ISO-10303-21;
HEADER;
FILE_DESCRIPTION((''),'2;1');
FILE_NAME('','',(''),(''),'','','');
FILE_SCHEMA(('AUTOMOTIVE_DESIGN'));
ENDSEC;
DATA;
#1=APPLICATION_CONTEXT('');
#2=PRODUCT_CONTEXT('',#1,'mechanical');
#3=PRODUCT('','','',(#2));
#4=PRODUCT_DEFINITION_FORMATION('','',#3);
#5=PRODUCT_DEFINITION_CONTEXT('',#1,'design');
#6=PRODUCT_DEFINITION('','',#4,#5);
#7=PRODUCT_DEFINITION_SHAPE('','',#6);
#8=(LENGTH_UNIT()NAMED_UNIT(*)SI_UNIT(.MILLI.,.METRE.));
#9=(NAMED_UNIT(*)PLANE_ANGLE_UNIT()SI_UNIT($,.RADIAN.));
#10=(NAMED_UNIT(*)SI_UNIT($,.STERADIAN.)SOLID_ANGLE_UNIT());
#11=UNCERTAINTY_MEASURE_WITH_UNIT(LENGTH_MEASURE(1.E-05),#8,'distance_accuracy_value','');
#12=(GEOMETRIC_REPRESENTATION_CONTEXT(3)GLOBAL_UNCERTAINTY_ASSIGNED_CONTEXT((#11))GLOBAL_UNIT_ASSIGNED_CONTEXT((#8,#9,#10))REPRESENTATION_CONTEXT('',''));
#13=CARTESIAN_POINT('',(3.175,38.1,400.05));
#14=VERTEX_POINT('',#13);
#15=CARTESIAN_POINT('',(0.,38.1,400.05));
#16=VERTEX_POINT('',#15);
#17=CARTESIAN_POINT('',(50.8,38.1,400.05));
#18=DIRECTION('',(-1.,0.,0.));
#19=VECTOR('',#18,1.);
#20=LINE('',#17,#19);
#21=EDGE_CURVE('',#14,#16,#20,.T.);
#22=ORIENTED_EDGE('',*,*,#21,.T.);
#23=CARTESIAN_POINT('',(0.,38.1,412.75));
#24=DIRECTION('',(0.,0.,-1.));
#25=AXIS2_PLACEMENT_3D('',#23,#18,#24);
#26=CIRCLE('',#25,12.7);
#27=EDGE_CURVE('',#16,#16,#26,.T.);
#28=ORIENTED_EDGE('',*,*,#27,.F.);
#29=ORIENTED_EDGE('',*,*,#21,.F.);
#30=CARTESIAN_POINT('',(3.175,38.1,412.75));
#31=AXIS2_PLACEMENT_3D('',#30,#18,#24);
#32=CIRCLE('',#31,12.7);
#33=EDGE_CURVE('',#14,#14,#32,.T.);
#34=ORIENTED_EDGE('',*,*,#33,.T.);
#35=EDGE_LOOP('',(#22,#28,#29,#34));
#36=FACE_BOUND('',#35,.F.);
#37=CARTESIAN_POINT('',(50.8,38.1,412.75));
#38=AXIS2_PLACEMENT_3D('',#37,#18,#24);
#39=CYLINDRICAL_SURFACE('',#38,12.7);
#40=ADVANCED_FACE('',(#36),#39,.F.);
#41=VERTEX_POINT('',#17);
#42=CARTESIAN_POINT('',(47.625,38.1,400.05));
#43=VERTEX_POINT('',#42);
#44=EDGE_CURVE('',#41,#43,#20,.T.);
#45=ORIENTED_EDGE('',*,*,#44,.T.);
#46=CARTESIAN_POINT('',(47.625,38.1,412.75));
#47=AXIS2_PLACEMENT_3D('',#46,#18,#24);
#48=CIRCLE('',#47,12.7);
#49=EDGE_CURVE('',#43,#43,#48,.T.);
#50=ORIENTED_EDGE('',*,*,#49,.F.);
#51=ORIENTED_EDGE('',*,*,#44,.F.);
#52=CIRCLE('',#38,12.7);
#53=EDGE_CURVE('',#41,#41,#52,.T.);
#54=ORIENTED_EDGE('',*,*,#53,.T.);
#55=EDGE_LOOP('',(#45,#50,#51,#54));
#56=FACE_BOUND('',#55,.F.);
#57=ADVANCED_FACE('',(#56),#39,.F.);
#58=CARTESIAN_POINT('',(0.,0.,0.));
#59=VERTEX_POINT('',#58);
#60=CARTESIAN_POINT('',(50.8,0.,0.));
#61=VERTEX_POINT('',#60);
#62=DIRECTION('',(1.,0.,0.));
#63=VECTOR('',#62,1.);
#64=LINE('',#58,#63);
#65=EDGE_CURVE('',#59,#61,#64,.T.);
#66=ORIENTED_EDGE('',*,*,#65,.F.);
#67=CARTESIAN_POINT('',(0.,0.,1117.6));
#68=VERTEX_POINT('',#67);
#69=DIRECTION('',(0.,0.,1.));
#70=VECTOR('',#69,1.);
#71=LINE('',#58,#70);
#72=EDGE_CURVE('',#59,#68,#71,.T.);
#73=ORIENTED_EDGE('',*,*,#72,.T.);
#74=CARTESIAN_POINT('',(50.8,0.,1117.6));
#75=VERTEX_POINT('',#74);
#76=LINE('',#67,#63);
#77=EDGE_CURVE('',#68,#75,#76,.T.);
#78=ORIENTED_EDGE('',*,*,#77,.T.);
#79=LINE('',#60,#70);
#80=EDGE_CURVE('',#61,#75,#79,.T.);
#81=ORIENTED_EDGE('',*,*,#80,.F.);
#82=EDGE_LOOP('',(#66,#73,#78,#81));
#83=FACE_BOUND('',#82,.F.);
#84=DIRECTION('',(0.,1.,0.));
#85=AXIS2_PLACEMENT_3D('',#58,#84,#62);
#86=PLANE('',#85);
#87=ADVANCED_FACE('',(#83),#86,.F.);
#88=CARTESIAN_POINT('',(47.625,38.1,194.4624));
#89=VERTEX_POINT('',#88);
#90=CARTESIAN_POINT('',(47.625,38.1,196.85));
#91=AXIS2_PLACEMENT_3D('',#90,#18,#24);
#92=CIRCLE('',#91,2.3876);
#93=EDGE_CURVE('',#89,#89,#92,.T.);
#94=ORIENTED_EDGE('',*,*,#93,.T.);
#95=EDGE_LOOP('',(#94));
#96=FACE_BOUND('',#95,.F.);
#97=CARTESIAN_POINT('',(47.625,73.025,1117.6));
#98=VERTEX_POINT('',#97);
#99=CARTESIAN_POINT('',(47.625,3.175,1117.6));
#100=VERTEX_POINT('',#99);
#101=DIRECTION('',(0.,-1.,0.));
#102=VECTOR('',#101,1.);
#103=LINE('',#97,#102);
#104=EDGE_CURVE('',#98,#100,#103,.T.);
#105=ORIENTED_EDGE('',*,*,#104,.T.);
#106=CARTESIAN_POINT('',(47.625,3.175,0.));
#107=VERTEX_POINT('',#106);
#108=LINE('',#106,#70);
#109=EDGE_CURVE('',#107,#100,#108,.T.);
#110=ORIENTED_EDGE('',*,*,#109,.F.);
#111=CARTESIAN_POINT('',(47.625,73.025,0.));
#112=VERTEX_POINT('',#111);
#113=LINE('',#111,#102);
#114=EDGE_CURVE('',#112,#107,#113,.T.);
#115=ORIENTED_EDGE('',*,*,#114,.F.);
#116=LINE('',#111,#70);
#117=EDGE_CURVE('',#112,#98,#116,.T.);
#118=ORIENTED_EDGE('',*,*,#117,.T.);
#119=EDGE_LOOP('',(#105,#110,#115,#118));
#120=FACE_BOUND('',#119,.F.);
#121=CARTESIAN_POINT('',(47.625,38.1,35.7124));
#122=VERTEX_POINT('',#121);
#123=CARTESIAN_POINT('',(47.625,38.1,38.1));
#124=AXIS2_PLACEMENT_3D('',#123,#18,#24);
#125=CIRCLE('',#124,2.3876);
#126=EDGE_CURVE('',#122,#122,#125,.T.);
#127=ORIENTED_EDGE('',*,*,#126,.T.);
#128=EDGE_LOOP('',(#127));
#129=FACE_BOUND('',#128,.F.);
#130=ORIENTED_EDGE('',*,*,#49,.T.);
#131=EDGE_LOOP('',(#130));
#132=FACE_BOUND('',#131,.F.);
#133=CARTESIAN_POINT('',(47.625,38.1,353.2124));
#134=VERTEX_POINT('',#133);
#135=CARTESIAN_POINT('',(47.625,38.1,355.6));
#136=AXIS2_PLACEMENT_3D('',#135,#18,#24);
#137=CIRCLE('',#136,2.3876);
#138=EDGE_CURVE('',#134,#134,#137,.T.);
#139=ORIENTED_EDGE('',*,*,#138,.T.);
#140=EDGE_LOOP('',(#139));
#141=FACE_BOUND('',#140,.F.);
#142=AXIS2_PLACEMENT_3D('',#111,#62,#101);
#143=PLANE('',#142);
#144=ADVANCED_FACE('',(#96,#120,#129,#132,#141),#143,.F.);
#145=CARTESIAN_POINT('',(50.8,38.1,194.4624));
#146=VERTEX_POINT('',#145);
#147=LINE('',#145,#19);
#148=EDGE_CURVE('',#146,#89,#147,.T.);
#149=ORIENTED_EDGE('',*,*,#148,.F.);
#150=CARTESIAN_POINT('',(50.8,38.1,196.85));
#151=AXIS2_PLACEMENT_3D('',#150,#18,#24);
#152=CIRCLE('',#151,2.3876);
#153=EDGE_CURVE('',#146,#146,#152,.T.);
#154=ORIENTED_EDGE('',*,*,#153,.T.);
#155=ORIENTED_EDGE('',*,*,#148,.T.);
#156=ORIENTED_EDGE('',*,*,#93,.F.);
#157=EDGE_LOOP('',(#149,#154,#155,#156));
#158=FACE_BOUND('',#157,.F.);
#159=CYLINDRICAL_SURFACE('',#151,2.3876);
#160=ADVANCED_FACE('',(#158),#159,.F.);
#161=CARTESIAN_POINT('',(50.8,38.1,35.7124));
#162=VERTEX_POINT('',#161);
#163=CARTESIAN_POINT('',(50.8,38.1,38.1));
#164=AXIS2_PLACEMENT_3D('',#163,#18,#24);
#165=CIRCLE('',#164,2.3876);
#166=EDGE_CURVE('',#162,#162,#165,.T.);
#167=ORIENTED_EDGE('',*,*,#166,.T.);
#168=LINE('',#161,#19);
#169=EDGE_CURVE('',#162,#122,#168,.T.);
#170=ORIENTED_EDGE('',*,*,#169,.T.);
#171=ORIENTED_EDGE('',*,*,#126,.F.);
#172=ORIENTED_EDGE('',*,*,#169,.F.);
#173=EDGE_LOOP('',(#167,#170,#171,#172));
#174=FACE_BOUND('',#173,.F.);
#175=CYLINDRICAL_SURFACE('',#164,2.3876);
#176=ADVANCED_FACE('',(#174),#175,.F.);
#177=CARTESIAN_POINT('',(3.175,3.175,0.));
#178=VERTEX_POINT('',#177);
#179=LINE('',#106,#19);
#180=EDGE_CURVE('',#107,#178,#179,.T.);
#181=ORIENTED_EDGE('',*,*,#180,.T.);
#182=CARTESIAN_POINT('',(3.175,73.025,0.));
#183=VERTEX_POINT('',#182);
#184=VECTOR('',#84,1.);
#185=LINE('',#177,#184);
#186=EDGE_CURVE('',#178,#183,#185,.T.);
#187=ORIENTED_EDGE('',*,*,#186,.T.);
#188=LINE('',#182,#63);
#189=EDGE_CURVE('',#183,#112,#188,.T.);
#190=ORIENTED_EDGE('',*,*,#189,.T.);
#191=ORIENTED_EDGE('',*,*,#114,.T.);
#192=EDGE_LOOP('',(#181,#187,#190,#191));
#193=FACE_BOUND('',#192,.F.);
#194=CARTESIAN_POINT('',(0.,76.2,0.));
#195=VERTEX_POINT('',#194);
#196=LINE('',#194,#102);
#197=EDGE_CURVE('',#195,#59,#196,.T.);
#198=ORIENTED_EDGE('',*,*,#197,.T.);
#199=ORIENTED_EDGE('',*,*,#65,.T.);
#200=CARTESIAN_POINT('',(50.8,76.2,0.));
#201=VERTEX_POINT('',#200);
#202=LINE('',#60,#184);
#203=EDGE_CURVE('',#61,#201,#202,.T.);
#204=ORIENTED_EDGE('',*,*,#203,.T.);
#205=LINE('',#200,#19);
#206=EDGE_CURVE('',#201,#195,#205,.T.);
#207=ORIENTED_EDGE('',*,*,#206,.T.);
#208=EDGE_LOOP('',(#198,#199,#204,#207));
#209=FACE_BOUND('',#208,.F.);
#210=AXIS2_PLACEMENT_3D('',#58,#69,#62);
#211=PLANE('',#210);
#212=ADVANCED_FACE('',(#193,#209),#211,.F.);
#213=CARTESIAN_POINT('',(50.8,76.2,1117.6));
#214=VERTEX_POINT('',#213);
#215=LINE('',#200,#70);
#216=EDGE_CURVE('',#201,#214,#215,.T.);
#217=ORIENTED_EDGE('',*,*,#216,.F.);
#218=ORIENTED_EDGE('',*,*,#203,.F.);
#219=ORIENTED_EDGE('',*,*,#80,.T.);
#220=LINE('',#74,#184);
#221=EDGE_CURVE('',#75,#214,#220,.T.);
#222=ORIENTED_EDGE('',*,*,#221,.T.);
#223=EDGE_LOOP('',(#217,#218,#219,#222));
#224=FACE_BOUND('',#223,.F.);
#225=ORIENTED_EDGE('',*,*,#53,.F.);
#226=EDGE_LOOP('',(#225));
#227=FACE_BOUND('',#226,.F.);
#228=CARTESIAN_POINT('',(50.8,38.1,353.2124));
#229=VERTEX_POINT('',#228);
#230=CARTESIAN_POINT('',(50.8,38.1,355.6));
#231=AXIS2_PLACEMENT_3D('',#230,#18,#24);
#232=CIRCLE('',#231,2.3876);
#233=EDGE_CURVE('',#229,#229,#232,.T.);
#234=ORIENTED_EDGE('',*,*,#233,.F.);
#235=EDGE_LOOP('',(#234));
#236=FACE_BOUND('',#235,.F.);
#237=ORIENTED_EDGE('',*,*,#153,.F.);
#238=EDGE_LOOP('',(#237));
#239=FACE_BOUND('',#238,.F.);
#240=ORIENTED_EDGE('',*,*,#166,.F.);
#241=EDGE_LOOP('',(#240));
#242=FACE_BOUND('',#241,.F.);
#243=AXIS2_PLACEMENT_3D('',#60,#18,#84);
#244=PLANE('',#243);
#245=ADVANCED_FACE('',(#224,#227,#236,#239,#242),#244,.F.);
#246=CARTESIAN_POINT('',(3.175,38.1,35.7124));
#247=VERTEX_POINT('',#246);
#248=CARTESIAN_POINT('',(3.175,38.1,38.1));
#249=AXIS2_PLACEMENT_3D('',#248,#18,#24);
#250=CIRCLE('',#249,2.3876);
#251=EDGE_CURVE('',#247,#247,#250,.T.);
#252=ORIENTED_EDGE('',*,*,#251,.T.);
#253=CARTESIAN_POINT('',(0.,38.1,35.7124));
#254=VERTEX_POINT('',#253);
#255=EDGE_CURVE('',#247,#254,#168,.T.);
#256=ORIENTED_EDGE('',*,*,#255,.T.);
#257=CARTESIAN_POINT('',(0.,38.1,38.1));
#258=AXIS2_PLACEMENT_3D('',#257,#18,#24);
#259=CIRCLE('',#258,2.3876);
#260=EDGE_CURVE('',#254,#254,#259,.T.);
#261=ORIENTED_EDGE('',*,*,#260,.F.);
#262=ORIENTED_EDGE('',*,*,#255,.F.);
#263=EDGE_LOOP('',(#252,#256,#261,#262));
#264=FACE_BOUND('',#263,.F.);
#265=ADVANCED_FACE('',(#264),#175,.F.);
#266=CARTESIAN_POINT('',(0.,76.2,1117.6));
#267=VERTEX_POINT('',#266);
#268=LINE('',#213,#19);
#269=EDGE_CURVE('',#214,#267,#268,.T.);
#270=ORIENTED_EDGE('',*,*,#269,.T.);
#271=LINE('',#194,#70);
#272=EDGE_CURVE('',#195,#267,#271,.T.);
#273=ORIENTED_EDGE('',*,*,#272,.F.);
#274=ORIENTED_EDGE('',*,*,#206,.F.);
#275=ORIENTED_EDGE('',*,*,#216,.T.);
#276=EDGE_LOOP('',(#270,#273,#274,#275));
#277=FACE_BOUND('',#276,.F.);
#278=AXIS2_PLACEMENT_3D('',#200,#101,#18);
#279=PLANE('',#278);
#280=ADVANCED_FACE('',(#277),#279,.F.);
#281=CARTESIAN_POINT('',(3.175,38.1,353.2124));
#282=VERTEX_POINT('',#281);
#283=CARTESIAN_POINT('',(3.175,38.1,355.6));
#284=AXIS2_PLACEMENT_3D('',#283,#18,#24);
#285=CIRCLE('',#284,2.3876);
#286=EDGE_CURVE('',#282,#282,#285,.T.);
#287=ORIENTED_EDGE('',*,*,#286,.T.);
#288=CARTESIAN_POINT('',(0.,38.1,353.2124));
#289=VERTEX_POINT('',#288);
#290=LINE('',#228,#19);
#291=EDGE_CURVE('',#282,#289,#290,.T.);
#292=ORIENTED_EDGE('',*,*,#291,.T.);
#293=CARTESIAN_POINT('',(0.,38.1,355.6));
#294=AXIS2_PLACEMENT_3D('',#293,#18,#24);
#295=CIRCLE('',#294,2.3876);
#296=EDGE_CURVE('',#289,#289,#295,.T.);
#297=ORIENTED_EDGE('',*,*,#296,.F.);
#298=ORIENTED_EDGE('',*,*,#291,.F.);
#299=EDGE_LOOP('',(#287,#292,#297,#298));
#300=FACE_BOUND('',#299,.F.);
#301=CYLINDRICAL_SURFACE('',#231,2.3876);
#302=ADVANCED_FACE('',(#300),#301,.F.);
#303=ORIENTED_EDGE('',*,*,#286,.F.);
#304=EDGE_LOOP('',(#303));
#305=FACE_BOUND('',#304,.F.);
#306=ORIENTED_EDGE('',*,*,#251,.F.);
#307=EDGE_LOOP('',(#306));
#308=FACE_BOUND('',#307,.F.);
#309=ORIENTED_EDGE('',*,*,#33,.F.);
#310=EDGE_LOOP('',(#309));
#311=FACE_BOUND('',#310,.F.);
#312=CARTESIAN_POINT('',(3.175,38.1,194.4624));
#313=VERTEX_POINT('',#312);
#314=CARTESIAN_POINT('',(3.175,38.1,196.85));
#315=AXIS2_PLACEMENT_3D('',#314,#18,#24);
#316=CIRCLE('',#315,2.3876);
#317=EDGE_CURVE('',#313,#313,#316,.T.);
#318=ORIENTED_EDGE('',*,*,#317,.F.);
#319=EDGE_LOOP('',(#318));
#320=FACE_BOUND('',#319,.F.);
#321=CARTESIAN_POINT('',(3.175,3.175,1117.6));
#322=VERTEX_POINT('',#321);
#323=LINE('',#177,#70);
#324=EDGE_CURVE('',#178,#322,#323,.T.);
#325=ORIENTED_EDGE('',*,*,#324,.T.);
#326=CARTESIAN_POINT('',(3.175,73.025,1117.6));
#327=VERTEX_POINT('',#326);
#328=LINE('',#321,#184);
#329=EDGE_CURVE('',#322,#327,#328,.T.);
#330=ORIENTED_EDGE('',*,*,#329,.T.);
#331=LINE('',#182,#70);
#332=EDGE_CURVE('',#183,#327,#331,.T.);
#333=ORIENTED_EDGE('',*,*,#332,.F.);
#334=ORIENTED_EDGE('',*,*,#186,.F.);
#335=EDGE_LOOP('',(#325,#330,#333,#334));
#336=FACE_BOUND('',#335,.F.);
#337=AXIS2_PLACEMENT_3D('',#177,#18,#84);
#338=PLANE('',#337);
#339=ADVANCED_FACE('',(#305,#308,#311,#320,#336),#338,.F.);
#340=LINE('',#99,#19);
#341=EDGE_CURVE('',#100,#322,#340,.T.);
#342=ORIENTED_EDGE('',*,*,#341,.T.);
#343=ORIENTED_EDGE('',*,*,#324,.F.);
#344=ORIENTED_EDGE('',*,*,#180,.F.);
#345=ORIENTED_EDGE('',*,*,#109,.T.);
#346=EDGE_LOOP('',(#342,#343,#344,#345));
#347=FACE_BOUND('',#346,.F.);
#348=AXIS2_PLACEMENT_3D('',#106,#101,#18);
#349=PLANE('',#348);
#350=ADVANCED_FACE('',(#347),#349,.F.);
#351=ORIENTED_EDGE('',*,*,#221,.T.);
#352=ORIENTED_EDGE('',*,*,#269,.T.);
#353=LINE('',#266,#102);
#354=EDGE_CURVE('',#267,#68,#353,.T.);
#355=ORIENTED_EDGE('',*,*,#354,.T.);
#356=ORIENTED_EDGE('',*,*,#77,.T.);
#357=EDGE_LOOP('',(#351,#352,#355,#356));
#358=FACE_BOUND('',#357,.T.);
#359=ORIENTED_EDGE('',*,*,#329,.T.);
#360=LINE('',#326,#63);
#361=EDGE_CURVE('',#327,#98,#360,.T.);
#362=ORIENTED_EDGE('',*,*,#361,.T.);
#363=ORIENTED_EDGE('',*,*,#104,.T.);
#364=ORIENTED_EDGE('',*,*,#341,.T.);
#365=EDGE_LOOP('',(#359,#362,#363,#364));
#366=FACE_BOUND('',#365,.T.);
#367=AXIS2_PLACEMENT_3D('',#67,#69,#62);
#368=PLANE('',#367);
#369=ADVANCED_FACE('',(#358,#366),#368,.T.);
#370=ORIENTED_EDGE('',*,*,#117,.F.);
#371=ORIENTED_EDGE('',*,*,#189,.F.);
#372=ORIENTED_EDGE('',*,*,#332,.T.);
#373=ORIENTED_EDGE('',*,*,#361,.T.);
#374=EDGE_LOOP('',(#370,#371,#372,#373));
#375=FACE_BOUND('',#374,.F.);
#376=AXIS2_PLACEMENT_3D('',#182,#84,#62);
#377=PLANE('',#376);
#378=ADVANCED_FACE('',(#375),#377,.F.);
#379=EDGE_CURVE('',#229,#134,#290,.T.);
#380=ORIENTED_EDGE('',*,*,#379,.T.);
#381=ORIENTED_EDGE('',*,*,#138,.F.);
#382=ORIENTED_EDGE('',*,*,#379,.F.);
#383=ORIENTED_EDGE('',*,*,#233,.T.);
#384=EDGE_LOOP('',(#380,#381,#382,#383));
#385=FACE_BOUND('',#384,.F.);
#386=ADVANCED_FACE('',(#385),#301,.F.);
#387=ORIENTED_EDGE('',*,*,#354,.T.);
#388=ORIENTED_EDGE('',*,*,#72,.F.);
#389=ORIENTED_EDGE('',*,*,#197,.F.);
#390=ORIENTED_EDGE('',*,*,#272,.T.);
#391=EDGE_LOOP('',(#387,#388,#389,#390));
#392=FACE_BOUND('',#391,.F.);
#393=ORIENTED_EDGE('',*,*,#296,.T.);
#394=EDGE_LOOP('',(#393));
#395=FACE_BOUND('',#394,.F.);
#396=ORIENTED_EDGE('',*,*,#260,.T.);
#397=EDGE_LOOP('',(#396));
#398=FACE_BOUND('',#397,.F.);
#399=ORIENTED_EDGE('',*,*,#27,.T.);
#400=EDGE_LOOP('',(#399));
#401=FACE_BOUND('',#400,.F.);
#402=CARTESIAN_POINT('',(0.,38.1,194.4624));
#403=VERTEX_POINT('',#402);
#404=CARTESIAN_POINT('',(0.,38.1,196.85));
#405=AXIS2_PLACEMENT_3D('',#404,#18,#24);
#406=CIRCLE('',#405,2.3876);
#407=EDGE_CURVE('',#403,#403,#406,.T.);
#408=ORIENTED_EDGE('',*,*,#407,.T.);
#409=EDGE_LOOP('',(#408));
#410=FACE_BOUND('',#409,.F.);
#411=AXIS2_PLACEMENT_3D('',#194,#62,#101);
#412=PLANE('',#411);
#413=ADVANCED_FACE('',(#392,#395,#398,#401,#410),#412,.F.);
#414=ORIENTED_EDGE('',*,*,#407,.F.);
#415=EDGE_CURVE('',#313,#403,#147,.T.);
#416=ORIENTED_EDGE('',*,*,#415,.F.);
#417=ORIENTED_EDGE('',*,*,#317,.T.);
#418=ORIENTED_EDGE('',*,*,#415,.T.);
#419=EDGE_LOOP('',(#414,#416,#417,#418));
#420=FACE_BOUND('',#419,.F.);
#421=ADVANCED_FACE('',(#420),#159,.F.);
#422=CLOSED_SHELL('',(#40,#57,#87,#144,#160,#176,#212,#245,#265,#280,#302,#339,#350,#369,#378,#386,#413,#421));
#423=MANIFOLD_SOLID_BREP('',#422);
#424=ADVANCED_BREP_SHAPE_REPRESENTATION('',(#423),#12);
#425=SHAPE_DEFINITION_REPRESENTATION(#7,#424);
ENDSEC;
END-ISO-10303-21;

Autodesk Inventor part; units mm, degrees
ref_plane "YZ Plane" through (0, 0, 0) normal (1, 0, 0) x (0, 1, 0)
ref_plane "XZ Plane" through (0, 0, 0) normal (0, 1, 0) x (-1, 0, 0)
ref_plane "XY Plane" through (0, 0, 0) normal (0, 0, 1) x (1, 0, 0)
sketch "Sketch1" plane through (0, 0, 0) normal (0, 0, 1) x (1, 0, 0)
  line L0 (0, 0) -> (50.8, 0)
  line L1 (50.8, 0) -> (50.8, 76.2)
  line L2 (50.8, 76.2) -> (0, 76.2)
  line L3 (0, 76.2) -> (0, 0)
  line L4 (3.175, 73.025) -> (47.625, 73.025)
  line L5 (47.625, 73.025) -> (47.625, 3.175)
  line L6 (47.625, 3.175) -> (3.175, 3.175)
  line L7 (3.175, 3.175) -> (3.175, 73.025)
  dimension "d13" = 3.175
  dimension "d14" = 50.8
  dimension "d15" = 76.2
  dimension "d37" = 3.175
  dimension "d38" = 3.175
  dimension "d39" = 3.175
extrude "Extrusion1" add sketch "Sketch1" along normal blind 1117.6
hole "Hole1" at (50.8, 38.1, 412.75) direction (-1, 0, 0) diameter 25.4 end through all
hole "Hole2" at (50.8, 38.1, 38.1) direction (-1, 0, 0) diameter 4.7752 end through all
pattern_linear "Rectangular Pattern1" count 3 spacing 158.75 along (0, 0, 1) of "Hole2"
equation "\"d37\" = d13"
equation "\"d38\" = d13"
equation "\"d39\" = d13"
properties part number "GE-12019-02" material "Aluminum-6061"
